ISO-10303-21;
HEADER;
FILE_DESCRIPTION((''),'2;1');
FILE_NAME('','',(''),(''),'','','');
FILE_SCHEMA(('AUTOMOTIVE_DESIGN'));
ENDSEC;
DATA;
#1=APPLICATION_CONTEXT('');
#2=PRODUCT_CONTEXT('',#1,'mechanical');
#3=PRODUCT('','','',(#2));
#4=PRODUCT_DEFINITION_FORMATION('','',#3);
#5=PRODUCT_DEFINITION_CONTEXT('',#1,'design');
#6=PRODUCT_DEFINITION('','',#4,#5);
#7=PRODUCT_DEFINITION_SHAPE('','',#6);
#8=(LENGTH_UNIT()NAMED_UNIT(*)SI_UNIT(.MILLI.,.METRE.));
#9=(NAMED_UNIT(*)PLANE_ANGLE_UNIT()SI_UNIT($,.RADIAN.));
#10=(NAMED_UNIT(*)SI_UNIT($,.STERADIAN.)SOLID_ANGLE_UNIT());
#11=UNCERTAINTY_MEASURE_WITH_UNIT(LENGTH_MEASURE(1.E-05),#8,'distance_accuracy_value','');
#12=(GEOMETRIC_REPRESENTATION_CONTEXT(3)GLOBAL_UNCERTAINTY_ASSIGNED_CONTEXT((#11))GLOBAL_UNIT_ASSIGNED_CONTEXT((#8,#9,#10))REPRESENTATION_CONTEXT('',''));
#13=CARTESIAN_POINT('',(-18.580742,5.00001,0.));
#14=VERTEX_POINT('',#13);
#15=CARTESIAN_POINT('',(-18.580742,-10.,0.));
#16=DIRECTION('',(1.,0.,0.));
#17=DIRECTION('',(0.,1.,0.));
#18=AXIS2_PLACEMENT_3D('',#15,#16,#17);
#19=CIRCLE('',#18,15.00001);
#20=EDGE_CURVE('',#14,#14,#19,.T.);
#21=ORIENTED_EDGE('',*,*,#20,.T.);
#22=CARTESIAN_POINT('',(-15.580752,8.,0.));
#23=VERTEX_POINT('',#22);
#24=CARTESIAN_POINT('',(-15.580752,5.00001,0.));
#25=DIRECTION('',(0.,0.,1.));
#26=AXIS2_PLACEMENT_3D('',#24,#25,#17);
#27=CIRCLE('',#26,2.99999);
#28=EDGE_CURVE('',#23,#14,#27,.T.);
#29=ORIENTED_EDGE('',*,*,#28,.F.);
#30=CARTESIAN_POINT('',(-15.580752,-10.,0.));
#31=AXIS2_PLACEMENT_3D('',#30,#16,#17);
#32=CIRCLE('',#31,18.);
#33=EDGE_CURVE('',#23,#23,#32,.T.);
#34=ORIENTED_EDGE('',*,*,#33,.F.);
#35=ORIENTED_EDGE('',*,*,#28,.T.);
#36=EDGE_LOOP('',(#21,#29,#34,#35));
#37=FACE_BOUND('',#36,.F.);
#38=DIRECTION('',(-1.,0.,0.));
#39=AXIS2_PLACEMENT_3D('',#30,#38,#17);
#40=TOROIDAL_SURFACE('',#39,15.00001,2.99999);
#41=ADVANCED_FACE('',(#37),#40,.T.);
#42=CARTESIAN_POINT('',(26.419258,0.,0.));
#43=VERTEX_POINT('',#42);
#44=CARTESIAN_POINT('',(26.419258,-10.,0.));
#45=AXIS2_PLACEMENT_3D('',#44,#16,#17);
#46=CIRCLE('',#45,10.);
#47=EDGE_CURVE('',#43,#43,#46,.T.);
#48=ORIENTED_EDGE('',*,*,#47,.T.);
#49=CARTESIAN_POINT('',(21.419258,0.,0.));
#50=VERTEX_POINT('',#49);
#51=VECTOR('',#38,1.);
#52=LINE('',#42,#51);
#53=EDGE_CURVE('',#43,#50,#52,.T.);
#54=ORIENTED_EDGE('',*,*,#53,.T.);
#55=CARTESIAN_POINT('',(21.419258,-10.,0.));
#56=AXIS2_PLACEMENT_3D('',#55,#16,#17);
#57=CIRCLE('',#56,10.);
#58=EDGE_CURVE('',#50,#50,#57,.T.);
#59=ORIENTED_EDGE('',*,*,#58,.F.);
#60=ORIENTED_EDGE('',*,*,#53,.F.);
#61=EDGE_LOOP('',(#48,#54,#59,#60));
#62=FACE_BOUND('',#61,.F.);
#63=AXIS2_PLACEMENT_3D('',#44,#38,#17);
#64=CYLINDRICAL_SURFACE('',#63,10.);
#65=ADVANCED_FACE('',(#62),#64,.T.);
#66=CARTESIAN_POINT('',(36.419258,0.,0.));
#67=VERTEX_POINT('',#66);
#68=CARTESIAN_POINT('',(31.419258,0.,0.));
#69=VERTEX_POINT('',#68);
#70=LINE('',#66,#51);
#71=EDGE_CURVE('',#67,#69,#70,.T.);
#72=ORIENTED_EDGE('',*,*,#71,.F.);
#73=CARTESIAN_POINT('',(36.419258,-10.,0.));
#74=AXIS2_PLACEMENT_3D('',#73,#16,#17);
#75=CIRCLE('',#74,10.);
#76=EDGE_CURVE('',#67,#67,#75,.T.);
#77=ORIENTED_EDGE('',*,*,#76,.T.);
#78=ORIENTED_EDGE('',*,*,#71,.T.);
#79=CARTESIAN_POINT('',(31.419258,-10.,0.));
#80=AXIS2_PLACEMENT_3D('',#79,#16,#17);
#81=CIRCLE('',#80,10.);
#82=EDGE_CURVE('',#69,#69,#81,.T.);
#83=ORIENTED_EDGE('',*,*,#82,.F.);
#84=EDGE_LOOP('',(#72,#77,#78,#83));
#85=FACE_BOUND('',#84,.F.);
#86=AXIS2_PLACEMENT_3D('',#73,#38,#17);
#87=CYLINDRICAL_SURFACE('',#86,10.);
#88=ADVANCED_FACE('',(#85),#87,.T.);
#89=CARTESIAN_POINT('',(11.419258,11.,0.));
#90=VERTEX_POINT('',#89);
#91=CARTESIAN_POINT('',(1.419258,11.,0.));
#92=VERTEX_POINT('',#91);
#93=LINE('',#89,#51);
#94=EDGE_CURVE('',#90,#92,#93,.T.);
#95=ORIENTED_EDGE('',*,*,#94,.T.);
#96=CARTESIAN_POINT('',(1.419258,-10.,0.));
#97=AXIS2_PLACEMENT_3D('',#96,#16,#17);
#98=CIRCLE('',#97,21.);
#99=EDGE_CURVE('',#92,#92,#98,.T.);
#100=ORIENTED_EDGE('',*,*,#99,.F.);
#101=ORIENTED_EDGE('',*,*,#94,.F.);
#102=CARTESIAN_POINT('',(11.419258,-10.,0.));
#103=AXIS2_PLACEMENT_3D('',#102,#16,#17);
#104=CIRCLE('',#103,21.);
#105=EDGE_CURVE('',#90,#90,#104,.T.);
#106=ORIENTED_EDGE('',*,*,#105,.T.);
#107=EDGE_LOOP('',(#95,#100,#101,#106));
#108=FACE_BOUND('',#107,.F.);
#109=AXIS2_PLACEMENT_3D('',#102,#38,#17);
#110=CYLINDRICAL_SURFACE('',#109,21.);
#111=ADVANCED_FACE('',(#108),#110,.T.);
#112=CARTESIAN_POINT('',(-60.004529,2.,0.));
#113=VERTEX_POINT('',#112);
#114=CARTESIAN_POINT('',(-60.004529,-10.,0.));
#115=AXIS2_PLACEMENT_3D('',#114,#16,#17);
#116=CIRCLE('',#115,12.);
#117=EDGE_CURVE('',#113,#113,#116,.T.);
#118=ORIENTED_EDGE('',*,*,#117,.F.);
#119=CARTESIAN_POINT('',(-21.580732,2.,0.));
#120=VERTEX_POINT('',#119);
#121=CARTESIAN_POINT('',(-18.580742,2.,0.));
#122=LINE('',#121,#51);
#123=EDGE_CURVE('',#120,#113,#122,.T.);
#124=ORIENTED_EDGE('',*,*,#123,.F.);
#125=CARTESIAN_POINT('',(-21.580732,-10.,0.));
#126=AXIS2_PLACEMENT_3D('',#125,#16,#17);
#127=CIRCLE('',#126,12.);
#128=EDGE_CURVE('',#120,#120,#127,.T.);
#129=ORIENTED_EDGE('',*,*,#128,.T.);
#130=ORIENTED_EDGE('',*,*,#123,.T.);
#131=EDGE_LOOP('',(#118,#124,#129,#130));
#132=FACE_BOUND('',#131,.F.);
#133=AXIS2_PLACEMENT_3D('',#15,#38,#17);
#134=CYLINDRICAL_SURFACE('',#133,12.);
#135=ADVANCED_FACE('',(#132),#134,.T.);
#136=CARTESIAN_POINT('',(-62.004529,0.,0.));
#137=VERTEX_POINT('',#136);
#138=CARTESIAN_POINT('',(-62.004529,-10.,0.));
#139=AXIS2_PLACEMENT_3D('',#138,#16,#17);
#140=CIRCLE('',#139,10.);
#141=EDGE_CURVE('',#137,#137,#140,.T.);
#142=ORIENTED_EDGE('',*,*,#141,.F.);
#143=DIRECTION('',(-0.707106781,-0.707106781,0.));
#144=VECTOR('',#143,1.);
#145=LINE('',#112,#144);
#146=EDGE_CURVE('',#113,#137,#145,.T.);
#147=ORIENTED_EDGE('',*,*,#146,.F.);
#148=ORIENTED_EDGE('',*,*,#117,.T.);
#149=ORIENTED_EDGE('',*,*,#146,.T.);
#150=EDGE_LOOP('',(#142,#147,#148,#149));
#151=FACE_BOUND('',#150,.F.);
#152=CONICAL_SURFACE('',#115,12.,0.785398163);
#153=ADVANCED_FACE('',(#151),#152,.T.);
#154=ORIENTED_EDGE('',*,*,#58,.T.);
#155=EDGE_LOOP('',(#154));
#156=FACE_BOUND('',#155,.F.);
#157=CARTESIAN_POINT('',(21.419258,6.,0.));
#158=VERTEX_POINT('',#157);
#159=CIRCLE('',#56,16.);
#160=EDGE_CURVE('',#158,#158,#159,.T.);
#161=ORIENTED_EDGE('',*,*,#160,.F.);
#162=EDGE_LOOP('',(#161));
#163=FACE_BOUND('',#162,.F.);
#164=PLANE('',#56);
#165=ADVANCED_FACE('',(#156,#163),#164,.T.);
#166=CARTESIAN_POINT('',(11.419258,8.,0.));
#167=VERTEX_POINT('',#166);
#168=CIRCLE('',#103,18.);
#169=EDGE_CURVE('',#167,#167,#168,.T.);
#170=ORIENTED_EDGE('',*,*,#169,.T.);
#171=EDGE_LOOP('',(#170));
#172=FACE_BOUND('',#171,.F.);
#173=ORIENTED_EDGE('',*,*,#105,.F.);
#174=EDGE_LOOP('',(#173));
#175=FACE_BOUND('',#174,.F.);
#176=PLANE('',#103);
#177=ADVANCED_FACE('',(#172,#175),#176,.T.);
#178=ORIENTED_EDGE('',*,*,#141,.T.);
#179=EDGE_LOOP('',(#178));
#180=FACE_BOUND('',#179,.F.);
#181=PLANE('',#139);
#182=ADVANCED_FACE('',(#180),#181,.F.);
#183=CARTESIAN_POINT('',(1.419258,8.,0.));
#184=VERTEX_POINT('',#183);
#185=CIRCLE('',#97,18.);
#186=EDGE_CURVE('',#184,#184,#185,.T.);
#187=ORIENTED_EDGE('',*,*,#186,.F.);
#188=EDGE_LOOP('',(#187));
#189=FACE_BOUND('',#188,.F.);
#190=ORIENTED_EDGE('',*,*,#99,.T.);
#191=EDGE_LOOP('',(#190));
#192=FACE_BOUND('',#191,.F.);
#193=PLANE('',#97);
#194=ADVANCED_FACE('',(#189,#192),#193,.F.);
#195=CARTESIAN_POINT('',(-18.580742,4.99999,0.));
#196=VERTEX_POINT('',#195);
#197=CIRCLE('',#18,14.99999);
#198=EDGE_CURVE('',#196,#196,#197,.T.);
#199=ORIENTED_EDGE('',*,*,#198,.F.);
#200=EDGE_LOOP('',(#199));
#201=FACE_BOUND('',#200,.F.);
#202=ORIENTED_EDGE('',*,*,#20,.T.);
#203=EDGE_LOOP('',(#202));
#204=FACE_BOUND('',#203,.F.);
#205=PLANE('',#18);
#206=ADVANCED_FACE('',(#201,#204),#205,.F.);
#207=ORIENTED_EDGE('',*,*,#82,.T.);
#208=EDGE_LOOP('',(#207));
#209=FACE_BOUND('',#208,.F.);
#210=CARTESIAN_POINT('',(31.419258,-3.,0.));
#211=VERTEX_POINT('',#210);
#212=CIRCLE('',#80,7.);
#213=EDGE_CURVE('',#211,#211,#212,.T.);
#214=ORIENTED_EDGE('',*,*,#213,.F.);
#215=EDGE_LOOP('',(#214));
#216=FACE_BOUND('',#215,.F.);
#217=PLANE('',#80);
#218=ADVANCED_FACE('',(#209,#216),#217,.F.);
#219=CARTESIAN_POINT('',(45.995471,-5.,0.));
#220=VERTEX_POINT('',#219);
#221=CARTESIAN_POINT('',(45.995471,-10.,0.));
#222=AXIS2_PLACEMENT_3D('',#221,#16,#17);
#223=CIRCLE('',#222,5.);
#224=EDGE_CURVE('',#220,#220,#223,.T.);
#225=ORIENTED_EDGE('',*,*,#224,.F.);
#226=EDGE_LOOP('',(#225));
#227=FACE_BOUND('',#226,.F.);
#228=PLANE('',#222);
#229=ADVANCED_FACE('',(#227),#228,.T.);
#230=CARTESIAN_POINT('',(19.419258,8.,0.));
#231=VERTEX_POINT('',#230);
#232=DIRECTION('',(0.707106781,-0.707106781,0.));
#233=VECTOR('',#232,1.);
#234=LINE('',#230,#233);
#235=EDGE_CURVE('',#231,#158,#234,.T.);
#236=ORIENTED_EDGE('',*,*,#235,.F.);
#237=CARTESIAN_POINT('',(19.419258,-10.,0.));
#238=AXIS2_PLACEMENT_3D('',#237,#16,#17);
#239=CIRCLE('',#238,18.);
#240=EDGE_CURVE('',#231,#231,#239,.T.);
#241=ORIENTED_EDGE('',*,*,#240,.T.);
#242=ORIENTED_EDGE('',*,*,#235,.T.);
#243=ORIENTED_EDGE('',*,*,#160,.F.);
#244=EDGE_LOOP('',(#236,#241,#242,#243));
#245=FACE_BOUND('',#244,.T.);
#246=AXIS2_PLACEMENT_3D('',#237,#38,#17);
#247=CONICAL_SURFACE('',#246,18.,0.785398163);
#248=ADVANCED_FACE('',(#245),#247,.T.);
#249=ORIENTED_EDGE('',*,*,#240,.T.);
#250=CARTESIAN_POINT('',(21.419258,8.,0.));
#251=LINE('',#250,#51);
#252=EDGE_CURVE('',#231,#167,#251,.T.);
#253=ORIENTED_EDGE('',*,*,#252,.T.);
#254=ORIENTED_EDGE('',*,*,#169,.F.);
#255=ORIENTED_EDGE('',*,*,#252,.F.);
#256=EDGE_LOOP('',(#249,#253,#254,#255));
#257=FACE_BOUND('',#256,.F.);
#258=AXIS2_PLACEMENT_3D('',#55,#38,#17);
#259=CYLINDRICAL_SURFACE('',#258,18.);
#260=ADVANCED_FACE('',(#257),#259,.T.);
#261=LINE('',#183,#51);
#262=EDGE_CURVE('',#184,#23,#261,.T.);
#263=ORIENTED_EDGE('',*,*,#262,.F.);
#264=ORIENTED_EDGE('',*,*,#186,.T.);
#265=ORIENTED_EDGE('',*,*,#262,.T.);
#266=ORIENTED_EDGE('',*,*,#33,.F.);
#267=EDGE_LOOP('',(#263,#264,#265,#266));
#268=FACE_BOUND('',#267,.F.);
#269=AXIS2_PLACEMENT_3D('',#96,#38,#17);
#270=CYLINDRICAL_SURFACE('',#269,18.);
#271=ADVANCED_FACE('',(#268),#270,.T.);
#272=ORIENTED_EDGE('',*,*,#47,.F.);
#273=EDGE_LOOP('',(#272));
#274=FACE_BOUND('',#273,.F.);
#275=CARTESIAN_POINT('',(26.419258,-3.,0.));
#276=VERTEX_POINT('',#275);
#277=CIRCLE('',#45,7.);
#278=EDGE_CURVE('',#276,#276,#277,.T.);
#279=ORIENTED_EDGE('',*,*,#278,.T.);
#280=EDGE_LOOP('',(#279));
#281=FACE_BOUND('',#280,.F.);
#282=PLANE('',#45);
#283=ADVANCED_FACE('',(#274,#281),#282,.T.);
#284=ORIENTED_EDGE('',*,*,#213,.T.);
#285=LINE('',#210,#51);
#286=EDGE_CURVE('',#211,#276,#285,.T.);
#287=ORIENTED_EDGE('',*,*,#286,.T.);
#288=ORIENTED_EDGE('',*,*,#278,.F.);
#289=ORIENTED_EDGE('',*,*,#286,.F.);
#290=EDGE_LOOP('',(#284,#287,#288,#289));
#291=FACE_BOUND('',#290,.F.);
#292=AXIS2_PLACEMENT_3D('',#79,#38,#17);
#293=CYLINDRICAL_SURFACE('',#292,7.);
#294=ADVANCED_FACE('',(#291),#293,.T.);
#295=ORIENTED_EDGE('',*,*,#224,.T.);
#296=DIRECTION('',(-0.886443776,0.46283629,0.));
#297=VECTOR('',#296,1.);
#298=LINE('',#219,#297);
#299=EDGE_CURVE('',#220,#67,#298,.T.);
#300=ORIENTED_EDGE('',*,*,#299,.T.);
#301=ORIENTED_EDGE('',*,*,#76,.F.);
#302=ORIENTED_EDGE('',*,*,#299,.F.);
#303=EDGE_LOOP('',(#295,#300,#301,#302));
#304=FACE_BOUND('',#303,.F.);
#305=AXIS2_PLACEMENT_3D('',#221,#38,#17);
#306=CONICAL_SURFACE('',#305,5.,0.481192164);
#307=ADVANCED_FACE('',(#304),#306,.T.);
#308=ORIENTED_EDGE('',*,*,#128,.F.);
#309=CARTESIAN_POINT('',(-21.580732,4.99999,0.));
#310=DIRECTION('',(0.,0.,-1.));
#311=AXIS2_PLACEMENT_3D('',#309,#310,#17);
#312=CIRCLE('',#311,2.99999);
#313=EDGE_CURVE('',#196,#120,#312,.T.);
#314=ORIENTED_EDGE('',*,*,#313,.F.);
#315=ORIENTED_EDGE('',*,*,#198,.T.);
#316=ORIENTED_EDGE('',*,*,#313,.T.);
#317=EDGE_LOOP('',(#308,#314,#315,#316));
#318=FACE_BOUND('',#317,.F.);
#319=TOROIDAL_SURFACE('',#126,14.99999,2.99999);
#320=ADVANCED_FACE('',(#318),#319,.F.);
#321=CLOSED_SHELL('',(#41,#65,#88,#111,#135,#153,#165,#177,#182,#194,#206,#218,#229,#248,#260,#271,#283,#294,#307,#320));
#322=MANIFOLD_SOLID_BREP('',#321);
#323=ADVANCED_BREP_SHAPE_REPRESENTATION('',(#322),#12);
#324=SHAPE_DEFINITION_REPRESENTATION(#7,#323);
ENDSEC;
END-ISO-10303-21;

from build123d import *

# Parameters (mm, degrees)
F2_R    = 2.99999
F3_SIZE = 2


# Not quite as in the source:
# - a fillet or chamfer is up to 0.001 mm smaller than in the source, because OpenCascade refuses the exact size


with BuildPart() as f1:
    # F0 (on Top) → F1 (revolve)
    with BuildSketch(Plane.XY):
        Polygon((-62.0045285772, 2), (-62.0045285772, -10), (45.9954714228, -10), (45.9954714228, -5), (36.4192584626, 0), (31.4192584626, 0), (31.4192584626, -3), (26.4192584626, -3), (26.4192584626, 0), (21.4192584626, 0), (21.4192584626, 8), (11.4192584626, 8), (11.4192584626, 11), (1.4192584626, 11), (1.4192584626, 8), (-18.5807415374, 8), (-18.5807415374, 2), align=None)
    revolve(axis=Axis((-8.0045285772, -10, 0), (1, 0, 0)))

    # F2 (radius 3 in the source; OpenCascade refuses exactly that, so slightly less here)
    f2_edges = [f1.edges().sort_by_distance(p)[0] for p in [
        (-18.580742, -28, 0),
        (-18.580742, -22, 0),
    ]]
    fillet(f2_edges, radius=F2_R)

    # F3
    f3_edges = [f1.edges().sort_by_distance(p)[0] for p in [
        (21.419258, -28, 0),
        (-62.004529, -22, 0),
    ]]
    chamfer(f3_edges, length=F3_SIZE)


solid = f1.part
